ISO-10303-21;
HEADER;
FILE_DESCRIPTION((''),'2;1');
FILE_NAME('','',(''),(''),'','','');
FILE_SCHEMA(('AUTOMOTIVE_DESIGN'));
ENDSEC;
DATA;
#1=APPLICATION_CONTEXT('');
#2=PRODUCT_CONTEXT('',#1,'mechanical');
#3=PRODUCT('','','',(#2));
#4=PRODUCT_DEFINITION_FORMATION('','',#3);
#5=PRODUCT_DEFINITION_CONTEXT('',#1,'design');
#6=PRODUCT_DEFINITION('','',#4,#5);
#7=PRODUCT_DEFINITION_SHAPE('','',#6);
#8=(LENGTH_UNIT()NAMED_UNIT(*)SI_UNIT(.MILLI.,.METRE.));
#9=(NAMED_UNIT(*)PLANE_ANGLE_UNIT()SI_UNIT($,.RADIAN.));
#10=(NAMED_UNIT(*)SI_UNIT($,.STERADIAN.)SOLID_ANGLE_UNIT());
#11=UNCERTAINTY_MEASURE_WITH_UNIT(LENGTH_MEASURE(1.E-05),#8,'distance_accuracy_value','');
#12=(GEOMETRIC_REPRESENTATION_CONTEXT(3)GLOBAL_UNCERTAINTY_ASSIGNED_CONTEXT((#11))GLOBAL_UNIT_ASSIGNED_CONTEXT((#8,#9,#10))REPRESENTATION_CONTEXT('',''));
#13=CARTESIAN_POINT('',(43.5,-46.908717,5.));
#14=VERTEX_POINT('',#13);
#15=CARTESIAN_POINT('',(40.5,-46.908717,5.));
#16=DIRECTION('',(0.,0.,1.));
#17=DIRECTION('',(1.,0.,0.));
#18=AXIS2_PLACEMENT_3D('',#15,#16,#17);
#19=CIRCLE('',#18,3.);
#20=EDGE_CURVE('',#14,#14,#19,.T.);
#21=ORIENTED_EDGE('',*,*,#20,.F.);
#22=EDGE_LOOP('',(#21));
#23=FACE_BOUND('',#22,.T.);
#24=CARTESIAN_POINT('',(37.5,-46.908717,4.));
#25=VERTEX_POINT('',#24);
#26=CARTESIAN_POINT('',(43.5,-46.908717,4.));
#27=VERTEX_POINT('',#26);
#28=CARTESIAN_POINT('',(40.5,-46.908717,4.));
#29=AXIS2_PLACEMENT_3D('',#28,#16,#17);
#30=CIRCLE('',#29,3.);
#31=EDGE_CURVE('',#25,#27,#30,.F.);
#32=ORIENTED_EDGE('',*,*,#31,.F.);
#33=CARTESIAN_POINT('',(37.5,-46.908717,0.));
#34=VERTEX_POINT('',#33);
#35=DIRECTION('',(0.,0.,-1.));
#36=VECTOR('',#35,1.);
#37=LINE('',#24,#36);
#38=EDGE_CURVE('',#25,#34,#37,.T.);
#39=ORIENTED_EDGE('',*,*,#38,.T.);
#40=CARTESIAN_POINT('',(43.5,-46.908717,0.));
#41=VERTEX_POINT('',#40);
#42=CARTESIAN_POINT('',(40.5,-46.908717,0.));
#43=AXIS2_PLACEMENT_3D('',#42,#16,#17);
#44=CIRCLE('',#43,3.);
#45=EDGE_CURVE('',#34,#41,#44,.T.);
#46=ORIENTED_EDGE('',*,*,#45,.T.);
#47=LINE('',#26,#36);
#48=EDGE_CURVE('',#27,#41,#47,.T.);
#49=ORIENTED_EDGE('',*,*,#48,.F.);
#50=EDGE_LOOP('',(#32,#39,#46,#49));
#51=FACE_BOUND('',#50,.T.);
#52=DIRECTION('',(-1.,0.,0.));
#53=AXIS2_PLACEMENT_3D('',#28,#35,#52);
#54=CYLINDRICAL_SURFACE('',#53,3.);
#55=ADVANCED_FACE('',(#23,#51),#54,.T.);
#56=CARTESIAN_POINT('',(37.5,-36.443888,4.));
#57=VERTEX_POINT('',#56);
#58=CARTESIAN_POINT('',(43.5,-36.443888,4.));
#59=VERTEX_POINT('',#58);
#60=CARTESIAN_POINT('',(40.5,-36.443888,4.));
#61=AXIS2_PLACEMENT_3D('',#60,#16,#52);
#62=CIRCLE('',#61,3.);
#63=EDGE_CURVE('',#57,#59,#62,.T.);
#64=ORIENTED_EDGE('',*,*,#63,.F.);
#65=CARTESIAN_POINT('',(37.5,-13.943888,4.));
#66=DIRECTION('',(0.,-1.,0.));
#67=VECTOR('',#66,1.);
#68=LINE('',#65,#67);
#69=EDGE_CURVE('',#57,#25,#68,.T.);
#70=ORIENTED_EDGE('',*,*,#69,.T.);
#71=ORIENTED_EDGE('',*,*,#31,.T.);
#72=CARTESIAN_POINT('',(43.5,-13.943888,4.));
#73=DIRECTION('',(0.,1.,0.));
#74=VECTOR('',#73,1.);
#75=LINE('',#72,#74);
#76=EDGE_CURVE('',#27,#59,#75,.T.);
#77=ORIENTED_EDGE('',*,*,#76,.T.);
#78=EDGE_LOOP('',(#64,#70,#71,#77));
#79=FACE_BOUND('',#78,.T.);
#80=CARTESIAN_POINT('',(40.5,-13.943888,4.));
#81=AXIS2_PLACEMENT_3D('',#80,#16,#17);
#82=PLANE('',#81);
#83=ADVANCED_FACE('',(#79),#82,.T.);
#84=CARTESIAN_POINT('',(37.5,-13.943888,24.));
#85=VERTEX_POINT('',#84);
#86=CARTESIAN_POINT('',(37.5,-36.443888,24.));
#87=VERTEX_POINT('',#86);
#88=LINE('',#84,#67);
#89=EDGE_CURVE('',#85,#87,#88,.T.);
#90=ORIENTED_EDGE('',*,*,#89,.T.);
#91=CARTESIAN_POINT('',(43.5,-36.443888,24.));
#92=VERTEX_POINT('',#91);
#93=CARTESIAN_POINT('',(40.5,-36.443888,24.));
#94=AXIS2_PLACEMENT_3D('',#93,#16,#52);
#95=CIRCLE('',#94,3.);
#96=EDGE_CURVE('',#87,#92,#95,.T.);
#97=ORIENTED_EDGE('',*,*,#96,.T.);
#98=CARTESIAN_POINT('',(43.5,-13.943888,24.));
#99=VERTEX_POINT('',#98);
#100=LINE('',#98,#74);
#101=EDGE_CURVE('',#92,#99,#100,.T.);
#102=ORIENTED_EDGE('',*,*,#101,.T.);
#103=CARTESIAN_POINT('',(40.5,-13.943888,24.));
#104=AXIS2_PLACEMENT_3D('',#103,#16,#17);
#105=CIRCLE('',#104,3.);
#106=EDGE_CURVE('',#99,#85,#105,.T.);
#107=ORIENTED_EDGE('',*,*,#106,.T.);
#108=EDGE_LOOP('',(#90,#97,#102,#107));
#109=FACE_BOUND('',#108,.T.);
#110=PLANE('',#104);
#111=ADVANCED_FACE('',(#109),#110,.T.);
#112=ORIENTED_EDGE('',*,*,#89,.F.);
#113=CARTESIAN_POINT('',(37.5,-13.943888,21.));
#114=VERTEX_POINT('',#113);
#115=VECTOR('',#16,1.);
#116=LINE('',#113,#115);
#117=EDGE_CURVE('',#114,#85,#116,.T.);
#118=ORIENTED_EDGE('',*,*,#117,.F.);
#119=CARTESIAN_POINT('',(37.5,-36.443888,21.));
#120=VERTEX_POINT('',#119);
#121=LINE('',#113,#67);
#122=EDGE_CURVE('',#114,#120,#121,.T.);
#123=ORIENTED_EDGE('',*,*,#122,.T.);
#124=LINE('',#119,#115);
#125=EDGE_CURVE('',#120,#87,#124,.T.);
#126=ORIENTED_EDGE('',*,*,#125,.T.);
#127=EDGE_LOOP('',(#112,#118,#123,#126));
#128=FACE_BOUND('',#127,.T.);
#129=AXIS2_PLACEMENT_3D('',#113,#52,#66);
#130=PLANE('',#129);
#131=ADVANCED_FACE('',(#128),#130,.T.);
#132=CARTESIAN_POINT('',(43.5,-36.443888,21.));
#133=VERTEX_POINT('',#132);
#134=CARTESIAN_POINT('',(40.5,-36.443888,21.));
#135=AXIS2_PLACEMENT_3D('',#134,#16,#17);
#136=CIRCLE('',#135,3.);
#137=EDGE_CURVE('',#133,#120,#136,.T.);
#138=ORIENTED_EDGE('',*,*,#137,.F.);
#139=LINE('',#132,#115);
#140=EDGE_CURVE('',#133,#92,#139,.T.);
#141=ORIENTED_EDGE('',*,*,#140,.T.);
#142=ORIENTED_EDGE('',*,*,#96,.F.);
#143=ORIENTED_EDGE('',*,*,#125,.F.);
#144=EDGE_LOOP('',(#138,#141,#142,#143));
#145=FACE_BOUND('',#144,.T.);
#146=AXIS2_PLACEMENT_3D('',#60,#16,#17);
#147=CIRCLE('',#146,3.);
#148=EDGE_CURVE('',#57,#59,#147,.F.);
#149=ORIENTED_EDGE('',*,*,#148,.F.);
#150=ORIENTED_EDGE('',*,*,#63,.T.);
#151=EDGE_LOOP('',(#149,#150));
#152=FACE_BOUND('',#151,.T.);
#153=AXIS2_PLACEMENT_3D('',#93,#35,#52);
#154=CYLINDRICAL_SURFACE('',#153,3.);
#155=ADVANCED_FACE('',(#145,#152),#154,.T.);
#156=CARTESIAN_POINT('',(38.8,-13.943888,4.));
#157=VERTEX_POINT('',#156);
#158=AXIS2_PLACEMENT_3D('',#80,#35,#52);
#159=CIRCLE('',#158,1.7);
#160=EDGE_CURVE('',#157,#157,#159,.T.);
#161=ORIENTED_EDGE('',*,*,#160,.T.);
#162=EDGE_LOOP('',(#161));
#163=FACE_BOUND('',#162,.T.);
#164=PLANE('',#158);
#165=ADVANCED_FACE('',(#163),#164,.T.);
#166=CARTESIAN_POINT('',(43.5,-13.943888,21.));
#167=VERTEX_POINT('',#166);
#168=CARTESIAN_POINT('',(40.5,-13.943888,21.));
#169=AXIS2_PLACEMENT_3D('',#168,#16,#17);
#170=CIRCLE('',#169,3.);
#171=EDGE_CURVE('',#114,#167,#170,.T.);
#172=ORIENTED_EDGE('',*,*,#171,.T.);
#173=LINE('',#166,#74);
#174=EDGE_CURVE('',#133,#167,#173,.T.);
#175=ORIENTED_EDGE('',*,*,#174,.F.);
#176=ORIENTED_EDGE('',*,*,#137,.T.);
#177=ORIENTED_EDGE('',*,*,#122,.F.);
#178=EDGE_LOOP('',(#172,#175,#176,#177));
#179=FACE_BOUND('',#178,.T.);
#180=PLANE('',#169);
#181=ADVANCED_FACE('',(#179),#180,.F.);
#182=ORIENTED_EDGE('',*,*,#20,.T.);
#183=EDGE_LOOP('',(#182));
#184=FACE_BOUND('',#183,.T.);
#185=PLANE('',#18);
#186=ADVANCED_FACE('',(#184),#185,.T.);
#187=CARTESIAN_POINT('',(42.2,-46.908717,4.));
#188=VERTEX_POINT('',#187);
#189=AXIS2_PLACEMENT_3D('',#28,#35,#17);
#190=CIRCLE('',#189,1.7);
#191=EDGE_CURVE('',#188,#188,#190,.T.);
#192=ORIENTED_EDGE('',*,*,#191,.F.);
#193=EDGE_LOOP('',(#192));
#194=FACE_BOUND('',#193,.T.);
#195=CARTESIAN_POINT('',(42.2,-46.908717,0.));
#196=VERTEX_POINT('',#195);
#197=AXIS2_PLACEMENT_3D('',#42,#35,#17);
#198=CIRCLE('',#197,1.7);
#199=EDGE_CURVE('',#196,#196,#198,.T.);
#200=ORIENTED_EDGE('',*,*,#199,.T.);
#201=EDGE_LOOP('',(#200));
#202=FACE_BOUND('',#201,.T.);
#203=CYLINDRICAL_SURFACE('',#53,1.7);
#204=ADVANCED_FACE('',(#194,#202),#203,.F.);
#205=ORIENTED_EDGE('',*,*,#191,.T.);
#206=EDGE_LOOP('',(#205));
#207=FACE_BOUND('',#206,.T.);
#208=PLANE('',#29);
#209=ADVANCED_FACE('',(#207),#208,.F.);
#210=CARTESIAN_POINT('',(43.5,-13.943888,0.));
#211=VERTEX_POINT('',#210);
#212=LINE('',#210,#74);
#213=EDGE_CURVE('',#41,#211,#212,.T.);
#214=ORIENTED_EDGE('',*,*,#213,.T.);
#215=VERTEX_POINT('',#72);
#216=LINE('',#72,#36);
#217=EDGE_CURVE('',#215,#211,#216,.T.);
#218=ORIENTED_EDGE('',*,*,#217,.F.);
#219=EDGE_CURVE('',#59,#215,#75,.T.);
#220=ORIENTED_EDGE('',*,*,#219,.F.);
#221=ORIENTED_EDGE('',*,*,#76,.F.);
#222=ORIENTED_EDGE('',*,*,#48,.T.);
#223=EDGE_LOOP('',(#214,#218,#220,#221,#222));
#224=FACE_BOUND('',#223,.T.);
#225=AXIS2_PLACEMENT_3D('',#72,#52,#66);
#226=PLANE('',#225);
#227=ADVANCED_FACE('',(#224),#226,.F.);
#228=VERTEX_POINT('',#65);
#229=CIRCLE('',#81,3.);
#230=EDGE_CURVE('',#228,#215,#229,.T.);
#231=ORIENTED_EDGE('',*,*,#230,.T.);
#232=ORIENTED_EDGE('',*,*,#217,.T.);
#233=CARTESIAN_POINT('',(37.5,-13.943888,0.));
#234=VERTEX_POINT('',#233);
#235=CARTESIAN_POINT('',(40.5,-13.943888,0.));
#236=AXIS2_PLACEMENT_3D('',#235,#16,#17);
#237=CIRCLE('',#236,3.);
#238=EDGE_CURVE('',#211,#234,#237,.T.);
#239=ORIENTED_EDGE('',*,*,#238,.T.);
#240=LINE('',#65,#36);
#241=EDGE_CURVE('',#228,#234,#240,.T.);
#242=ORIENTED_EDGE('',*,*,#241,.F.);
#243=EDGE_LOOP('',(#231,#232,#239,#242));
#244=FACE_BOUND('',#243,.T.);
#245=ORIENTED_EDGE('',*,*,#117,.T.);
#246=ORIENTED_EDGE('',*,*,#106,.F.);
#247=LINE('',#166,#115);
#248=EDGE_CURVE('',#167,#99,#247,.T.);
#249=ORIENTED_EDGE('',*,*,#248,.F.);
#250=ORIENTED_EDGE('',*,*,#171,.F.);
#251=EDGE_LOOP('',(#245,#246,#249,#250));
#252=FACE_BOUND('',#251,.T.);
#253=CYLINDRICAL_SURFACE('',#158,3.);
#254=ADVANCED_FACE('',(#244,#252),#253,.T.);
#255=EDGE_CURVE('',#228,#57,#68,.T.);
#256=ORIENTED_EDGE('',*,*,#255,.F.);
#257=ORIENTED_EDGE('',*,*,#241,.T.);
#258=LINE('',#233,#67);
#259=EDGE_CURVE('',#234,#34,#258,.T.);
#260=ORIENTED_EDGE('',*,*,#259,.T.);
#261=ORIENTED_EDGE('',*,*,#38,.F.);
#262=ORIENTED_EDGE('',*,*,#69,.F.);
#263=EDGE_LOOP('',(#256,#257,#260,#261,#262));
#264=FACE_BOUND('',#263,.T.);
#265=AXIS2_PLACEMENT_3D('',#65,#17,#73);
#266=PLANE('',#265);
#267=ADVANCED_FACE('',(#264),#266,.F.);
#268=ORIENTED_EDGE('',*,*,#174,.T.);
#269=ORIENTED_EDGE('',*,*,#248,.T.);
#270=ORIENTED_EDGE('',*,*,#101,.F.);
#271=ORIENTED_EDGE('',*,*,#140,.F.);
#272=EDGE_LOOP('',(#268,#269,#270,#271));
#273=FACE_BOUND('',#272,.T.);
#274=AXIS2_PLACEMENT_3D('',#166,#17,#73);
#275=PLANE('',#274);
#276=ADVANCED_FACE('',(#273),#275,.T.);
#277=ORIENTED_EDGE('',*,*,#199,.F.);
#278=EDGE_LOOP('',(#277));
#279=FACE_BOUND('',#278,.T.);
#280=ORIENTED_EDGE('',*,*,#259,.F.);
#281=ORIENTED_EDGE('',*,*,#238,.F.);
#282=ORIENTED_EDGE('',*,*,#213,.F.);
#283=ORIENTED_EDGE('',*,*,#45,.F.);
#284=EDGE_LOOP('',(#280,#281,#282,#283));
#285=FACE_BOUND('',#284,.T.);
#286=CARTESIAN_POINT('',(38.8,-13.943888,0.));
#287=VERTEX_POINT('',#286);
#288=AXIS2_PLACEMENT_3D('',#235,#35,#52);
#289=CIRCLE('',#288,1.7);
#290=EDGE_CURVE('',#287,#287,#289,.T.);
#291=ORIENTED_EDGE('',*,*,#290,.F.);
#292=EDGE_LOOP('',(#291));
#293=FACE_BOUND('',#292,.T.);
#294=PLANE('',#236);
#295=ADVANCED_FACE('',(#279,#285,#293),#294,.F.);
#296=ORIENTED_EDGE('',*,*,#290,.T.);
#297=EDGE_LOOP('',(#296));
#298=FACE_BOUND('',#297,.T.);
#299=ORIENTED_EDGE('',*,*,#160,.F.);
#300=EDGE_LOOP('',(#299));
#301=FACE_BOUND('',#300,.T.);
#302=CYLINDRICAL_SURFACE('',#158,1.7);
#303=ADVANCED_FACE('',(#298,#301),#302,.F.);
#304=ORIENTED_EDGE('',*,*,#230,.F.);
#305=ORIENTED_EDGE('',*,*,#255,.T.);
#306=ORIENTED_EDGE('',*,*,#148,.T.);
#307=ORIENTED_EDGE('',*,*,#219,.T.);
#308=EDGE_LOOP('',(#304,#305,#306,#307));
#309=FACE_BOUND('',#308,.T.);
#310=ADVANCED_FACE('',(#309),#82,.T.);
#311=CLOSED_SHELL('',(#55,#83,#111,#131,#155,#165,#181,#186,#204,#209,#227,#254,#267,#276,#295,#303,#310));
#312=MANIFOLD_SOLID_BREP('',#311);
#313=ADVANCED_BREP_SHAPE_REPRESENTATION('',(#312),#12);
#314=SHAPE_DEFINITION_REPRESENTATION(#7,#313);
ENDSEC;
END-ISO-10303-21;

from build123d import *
from build123d.topology import SkipClean

# Parameters (mm, degrees)
AUFSATZ_LINEAR_AUSTRAGEN1_DEPTH = 4
SKIZZE2_R                       = 3
AUFSATZ_LINEAR_AUSTRAGEN2_DEPTH = 20
AUFSATZ_LINEAR_START            = -3
AUFSATZ_LINEAR_AUSTRAGEN3_DEPTH = 3
AUFSATZ_LINEAR_START_2          = -4
SKIZZE4_R                       = 3
AUFSATZ_LINEAR_AUSTRAGEN4_DEPTH = 5
SKIZZE5_R                       = 1.7
SCHNITT_LINEAR_AUSTRAGEN1_DEPTH = 4


with BuildPart() as part:
    # Skizze1 → Aufsatz-Linear austragen1 (new body)
    with BuildSketch(Plane.XY):
        with BuildLine():
            Line((43.5, -13.943887949), (43.5, -46.908717461))
            ThreePointArc((43.5, -46.908717461), (40.5, -49.908717461), (37.5, -46.908717461))
            Line((37.5, -46.908717461), (37.5, -13.943887949))
            ThreePointArc((37.5, -13.943887949), (40.5, -10.943887949), (43.5, -13.943887949))
        make_face()
    extrude(amount=AUFSATZ_LINEAR_AUSTRAGEN1_DEPTH)

    # Skizze2 → Aufsatz-Linear austragen2 (add)
    with SkipClean():  # the faces are left unmerged after this step: merging them gives an invalid solid
        with BuildSketch(Plane.XY.offset(4)):
            with Locations((40.5, -13.943887949)):
                Circle(SKIZZE2_R)
            with Locations(Location((40.5, -36.443887949, 0), (0, 0, 180))):
                Circle(SKIZZE2_R)
        extrude(amount=AUFSATZ_LINEAR_AUSTRAGEN2_DEPTH)
    add(part.part.scale(1), mode=Mode.REPLACE)  # the faces are merged on a copy

    # Skizze3 → Aufsatz-Linear austragen3 (add)
    with BuildSketch(Plane.XY.offset(24).offset(AUFSATZ_LINEAR_START)):
        with BuildLine():
            Line((43.5, -13.943887949), (43.5, -36.443887949))
            ThreePointArc((43.5, -36.443887949), (40.5, -39.443887949), (37.5, -36.443887949))
            Line((37.5, -36.443887949), (37.5, -13.943887949))
            ThreePointArc((37.5, -13.943887949), (40.5, -10.943887949), (43.5, -13.943887949))
        make_face()
    extrude(amount=AUFSATZ_LINEAR_AUSTRAGEN3_DEPTH)

    # Skizze4 → Aufsatz-Linear austragen4 (add)
    with BuildSketch(Plane.XY.offset(4).offset(AUFSATZ_LINEAR_START_2)):
        with Locations((40.5, -46.908717461)):
            Circle(SKIZZE4_R)
    extrude(amount=AUFSATZ_LINEAR_AUSTRAGEN4_DEPTH)

    # Skizze5 → Schnitt-Linear austragen1 (cut)
    with BuildSketch(Plane(origin=(0, 0, 0), x_dir=(-1, 0, 0), z_dir=(0, 0, -1))):
        with Locations((-40.5, -13.943887949)):
            Circle(SKIZZE5_R)
        with Locations(Location((-40.5, -46.908717461, 0), (0, 0, 180))):
            Circle(SKIZZE5_R)
    extrude(amount=-SCHNITT_LINEAR_AUSTRAGEN1_DEPTH, mode=Mode.SUBTRACT)


solid = part.part
